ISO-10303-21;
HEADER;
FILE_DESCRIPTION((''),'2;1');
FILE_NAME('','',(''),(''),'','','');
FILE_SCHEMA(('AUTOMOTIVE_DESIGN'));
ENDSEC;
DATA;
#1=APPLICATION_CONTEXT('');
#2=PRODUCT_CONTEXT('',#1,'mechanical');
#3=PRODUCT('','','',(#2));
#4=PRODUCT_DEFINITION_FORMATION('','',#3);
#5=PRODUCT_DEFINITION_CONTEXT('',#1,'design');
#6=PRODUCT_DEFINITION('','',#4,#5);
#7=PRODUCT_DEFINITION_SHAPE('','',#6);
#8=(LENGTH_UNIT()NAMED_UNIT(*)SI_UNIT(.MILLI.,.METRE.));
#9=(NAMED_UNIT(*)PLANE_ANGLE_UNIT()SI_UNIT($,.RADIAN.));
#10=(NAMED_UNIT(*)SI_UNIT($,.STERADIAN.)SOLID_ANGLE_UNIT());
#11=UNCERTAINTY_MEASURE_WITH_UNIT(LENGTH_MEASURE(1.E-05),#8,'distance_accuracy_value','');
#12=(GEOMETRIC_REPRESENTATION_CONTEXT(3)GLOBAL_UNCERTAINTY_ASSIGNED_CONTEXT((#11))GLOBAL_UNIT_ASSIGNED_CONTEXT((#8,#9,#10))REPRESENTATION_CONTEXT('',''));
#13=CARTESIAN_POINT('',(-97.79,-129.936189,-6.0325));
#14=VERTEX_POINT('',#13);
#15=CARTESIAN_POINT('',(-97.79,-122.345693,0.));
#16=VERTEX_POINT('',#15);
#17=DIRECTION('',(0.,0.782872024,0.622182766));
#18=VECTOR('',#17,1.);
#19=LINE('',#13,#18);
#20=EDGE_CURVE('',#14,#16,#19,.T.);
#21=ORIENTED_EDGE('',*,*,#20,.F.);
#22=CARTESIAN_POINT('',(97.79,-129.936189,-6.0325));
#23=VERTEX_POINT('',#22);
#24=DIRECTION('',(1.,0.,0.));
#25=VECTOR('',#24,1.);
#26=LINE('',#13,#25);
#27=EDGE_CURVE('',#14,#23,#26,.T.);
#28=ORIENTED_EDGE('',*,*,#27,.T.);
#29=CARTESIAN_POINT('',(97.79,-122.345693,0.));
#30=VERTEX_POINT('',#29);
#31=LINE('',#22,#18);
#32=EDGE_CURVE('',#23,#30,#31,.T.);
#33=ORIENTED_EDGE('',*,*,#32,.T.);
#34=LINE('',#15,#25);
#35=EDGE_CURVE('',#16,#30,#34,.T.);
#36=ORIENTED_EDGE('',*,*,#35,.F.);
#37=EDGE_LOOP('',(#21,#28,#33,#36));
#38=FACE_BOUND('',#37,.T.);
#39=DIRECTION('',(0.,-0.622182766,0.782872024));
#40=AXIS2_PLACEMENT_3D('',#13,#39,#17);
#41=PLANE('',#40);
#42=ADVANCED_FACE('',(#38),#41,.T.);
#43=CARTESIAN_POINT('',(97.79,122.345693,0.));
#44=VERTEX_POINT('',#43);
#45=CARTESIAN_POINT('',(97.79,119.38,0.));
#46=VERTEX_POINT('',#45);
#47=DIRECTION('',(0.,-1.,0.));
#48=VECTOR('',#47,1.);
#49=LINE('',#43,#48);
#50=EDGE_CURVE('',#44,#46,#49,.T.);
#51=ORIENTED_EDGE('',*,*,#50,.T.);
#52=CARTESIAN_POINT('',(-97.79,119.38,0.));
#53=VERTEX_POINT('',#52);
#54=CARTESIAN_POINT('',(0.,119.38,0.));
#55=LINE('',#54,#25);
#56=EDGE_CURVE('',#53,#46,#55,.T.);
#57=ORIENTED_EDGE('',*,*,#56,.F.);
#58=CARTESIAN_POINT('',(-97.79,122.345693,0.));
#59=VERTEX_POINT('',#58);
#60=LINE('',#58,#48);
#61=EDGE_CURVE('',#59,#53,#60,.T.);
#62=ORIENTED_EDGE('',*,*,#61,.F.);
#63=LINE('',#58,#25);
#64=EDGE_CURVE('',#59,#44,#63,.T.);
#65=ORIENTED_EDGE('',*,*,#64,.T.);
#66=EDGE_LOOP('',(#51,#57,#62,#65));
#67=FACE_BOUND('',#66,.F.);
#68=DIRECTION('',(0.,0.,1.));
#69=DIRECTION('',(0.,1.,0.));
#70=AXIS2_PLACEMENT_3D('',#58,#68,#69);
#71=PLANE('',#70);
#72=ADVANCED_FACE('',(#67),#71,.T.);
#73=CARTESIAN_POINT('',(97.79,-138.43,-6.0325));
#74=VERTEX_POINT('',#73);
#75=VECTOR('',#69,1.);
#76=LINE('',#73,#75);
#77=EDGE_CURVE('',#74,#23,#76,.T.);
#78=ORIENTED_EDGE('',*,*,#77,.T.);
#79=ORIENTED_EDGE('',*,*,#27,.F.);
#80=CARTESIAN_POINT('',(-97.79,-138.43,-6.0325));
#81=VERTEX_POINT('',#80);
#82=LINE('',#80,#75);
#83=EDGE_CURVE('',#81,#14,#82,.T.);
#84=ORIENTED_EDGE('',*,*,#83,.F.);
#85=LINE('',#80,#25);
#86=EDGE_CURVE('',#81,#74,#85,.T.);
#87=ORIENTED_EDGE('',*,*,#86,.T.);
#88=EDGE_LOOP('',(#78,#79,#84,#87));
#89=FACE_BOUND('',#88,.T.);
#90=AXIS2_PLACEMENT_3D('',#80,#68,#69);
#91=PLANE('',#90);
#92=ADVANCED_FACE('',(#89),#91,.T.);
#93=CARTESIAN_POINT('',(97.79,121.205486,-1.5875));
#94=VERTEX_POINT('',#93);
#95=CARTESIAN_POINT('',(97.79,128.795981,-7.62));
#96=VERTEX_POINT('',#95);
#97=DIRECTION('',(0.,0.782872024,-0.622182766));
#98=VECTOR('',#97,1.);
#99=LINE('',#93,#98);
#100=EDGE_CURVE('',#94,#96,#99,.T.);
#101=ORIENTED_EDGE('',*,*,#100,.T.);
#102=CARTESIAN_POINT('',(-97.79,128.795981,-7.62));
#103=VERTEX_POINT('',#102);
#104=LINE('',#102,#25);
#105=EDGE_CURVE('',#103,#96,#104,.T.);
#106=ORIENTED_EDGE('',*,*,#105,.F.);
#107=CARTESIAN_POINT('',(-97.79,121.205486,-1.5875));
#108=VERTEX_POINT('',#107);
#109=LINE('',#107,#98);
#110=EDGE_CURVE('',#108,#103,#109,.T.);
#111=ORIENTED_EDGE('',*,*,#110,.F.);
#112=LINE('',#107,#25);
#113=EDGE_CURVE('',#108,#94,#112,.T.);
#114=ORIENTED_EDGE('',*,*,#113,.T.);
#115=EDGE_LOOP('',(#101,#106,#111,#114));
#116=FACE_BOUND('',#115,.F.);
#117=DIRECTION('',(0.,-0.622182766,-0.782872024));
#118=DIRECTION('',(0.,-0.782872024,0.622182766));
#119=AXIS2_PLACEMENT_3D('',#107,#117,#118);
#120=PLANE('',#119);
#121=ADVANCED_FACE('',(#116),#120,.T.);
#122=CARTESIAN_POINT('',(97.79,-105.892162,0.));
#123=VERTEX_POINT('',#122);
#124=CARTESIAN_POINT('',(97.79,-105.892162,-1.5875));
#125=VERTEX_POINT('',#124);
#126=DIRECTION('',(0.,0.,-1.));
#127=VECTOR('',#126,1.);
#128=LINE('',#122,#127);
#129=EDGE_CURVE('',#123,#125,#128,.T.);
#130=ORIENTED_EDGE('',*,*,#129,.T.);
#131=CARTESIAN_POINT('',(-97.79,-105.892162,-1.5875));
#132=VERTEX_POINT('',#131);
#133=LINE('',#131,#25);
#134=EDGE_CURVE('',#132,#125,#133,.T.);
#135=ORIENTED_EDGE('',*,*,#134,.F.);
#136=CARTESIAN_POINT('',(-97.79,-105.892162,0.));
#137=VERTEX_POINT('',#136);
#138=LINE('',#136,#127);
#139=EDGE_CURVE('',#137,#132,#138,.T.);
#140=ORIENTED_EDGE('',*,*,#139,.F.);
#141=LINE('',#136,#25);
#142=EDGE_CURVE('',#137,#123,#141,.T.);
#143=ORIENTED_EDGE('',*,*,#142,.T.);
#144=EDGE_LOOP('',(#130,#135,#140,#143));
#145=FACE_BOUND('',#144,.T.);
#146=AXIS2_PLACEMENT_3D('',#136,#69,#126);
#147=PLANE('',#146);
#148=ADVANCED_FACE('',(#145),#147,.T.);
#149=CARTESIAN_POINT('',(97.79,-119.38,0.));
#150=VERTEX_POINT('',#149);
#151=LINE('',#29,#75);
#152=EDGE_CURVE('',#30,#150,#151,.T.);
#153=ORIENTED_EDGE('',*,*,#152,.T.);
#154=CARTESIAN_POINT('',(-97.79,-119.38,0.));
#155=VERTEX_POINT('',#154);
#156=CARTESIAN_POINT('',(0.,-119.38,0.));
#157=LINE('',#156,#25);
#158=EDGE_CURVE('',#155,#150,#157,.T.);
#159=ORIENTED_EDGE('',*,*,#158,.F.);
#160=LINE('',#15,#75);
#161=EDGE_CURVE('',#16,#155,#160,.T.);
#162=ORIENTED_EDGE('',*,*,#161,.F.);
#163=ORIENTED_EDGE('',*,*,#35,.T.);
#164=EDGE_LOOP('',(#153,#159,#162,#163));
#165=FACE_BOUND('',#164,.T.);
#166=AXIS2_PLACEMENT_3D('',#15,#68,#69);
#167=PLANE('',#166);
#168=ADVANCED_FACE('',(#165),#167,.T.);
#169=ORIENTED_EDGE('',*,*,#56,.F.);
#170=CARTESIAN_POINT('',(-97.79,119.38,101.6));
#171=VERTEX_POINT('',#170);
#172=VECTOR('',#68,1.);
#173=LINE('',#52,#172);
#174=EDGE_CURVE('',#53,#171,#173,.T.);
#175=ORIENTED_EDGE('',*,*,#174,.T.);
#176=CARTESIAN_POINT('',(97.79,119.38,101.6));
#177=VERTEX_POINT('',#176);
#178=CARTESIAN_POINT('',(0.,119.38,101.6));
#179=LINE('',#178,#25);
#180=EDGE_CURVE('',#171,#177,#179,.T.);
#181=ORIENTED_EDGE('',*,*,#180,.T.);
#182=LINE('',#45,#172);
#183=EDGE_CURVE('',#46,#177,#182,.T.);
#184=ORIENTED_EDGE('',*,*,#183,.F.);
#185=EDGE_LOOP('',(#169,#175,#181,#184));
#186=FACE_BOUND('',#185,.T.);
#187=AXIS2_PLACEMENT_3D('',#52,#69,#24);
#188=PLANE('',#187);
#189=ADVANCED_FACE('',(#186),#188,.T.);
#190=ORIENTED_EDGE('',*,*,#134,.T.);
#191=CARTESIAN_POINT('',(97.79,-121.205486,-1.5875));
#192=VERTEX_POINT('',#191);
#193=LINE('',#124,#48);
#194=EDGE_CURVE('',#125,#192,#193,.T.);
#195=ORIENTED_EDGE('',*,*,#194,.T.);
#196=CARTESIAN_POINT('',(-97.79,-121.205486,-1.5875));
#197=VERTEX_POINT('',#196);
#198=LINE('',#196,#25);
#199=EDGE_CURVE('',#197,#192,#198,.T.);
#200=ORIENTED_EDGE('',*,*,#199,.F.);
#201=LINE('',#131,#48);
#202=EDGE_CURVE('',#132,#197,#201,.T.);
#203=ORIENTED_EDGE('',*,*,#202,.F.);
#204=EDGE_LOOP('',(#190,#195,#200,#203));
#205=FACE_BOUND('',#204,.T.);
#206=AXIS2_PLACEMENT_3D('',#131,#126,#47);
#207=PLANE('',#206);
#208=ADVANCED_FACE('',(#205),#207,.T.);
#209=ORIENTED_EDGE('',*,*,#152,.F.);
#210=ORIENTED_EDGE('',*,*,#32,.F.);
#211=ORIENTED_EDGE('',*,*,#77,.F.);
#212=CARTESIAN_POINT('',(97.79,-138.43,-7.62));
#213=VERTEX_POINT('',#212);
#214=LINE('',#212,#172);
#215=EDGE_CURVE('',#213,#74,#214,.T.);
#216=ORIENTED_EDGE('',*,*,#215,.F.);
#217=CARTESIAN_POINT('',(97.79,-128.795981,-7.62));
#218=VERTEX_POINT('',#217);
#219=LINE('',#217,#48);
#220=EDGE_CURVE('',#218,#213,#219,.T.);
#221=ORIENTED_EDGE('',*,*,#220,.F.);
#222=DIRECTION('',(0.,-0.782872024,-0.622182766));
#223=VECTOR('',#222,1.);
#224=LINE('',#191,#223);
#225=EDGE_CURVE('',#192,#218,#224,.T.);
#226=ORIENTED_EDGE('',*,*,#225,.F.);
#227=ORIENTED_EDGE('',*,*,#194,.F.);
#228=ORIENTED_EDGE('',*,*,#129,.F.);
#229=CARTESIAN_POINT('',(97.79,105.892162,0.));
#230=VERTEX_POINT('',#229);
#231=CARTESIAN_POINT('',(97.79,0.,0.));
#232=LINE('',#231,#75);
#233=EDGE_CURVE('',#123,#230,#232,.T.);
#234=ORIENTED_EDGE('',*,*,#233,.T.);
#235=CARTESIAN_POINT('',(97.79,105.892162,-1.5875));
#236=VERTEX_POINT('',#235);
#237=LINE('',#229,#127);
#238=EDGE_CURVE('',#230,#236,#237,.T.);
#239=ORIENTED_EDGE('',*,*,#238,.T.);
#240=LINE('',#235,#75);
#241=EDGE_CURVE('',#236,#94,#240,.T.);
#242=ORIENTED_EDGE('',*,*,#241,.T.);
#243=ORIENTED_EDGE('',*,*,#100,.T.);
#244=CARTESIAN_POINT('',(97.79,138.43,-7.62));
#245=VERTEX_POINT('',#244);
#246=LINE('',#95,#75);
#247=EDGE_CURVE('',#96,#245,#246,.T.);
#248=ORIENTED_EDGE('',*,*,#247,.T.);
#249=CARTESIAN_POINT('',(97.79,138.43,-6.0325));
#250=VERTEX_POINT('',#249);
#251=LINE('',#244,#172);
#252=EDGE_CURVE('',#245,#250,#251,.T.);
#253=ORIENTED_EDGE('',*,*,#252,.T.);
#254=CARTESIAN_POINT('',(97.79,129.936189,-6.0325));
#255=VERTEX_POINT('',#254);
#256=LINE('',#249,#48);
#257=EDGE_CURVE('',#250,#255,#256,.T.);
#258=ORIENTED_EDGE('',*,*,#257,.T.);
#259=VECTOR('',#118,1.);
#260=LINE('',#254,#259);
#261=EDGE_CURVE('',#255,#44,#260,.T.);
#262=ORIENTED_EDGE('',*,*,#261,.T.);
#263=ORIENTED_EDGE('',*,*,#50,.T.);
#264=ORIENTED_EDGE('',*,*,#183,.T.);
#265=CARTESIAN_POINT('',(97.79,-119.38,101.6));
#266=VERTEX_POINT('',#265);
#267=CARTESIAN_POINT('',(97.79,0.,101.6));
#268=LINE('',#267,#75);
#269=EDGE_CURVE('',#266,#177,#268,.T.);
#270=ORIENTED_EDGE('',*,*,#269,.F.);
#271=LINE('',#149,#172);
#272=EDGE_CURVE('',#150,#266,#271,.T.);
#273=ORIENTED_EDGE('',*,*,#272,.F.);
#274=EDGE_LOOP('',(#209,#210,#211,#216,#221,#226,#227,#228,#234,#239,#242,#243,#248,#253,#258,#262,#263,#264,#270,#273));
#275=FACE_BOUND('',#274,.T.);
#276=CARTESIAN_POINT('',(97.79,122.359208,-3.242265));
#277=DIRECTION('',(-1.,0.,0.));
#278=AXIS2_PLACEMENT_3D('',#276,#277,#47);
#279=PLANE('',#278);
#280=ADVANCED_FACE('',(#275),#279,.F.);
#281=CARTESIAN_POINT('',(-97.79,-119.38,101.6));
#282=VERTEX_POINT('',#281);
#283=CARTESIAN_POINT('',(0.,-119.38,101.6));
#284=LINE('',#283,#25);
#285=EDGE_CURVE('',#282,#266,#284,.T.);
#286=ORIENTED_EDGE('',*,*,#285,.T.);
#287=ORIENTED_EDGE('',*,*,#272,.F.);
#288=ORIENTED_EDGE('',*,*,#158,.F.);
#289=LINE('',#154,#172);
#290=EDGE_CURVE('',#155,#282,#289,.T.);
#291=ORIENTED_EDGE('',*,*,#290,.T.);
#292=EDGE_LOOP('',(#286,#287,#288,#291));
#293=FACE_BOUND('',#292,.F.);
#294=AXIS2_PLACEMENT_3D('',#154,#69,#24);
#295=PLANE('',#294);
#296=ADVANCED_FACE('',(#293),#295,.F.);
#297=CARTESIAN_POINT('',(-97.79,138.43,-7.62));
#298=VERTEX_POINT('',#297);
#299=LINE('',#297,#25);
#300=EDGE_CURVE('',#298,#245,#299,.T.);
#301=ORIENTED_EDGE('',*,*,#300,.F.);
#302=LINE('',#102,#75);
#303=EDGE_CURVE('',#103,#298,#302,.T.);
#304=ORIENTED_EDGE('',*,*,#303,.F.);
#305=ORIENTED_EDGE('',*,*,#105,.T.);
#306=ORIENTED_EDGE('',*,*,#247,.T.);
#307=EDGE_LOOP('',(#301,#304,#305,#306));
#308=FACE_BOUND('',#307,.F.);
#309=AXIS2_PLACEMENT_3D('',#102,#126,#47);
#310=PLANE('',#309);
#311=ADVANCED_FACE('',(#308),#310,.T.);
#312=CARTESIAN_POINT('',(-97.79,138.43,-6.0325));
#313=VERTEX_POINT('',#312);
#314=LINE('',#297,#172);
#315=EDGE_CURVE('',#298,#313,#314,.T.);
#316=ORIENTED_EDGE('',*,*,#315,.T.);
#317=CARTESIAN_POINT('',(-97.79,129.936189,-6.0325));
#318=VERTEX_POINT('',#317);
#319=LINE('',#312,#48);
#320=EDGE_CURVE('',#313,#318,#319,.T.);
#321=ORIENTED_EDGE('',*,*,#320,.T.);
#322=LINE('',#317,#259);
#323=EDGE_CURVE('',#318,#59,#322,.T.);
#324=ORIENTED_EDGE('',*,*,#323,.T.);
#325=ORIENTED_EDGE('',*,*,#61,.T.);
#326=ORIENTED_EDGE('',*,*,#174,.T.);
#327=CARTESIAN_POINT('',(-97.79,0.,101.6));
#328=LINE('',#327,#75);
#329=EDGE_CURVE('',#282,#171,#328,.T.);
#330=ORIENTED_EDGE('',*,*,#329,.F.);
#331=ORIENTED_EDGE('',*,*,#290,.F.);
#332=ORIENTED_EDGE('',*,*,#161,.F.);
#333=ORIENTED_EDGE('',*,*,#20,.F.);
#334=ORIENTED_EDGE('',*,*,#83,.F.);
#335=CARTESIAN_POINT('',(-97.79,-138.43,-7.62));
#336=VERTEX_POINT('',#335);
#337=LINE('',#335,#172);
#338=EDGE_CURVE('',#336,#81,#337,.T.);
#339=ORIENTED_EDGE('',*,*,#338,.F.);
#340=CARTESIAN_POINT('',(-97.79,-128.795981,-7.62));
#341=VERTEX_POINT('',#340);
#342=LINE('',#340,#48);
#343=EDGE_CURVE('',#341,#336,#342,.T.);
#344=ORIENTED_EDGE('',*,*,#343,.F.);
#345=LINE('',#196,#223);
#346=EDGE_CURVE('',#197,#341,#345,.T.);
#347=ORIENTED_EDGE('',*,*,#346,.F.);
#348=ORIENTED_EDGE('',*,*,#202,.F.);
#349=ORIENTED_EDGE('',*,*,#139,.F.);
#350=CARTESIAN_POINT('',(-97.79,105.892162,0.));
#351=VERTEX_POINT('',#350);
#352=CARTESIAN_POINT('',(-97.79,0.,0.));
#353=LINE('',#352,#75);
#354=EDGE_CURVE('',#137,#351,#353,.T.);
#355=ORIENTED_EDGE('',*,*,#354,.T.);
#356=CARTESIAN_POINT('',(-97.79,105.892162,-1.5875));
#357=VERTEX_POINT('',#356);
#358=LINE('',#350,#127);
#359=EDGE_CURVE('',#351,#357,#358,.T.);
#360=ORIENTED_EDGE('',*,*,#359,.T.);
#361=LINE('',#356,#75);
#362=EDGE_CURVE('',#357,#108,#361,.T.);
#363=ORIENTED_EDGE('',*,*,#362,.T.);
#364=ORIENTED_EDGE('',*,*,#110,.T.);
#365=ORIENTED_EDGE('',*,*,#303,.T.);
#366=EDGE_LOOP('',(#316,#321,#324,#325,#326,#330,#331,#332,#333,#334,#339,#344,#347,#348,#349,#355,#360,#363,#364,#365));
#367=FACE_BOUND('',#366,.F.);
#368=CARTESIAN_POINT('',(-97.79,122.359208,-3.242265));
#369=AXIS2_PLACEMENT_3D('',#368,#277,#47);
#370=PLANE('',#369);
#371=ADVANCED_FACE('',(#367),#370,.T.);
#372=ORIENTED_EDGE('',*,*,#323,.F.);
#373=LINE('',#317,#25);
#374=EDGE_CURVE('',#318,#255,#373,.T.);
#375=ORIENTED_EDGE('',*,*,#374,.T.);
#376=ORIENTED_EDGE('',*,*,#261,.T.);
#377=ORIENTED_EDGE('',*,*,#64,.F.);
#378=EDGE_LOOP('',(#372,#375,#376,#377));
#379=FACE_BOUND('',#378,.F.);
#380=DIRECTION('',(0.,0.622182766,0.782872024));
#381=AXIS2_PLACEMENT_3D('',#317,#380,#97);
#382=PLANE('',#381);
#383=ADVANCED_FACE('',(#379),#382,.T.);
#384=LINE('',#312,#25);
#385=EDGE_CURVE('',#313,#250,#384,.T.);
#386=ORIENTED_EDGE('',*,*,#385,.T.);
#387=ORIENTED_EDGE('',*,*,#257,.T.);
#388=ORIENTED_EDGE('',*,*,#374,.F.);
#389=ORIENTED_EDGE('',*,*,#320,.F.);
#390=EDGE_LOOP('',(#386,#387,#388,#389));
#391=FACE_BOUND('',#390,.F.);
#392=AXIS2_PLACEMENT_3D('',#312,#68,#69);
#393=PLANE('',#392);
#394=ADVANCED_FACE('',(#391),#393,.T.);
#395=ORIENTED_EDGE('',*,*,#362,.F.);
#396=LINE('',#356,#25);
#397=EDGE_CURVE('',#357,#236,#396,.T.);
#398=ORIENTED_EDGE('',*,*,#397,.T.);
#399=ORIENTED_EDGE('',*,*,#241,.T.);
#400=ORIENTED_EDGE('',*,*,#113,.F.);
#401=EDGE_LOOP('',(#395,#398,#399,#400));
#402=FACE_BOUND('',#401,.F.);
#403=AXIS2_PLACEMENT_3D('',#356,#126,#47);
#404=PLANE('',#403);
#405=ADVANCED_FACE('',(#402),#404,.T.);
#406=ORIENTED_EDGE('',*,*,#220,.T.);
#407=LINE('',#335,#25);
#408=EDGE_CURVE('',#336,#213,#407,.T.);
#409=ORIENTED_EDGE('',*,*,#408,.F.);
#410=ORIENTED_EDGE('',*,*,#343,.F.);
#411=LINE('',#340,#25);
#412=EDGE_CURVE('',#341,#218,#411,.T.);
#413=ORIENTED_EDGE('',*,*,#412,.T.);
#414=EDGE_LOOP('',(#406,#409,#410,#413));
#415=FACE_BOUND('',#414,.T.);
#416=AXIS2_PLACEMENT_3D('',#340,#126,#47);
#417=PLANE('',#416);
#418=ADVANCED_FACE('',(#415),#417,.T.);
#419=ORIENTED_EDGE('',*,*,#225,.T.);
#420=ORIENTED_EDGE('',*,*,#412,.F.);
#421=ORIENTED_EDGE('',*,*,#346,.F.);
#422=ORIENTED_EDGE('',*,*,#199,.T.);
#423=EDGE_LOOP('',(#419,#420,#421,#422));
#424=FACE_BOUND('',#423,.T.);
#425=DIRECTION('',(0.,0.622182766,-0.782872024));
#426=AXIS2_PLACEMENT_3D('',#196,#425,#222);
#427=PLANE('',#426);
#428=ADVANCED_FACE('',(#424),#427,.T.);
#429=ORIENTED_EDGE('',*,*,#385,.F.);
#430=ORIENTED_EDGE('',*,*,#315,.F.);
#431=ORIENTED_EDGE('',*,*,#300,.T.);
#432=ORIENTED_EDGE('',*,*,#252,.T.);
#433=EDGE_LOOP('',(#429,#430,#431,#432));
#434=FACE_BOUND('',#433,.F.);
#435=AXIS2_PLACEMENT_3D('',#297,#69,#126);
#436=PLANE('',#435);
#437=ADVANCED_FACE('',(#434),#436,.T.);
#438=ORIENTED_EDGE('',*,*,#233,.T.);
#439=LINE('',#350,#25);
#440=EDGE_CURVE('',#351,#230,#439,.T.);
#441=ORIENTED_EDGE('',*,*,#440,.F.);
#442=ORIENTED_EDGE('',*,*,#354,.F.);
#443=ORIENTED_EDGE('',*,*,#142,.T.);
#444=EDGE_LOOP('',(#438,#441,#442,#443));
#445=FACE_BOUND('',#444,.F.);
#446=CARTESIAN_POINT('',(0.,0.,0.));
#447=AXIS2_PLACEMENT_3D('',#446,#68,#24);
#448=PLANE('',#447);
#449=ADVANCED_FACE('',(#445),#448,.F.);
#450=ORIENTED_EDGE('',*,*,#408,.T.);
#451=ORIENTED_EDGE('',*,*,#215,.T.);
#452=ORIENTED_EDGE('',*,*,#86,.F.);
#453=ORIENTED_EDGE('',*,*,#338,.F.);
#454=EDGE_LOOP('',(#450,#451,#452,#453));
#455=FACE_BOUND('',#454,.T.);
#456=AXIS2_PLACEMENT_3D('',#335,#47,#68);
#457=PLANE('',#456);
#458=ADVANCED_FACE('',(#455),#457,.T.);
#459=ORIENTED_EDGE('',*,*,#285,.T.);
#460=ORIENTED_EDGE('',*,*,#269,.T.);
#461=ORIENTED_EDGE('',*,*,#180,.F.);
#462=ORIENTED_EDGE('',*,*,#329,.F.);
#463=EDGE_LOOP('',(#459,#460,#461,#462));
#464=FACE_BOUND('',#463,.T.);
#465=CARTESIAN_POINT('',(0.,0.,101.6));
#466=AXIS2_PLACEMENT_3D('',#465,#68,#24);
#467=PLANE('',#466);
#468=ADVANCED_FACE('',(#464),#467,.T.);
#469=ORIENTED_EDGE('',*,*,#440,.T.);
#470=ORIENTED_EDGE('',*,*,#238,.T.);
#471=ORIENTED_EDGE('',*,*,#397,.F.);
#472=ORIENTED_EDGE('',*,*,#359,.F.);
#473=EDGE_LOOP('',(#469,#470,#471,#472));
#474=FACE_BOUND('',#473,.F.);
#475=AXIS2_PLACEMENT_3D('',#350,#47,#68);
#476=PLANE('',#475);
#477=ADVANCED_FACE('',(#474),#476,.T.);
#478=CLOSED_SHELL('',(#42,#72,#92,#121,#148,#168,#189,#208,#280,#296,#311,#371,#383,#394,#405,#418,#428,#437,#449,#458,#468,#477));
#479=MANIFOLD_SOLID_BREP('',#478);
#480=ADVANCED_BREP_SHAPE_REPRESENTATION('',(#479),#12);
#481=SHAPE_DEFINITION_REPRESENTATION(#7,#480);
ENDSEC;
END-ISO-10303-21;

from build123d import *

# Parameters (mm, degrees)
F0_W     = 195.58
F0_H     = 238.76
F1_DEPTH = 101.6
F3_DEPTH = 195.58


# Not quite as in the source:
# - a pattern or mirror of a feature is missing from the dataset's text; its kind, count and spacing are read off the source's solid


with BuildPart() as f1:
    # F0 (on Top) → F1 (new body)
    with BuildSketch(Plane.XY):
        Rectangle(F0_W, F0_H)
    extrude(amount=F1_DEPTH)

    # F2 (on face) → F3 (join)
    with BuildSketch(Plane(origin=(-97.79, 0, 0), x_dir=(0, -1, 0), z_dir=(-1, 0, 0))):
        Polygon((122.3456934094, 0), (105.8921615149, 0), (105.8921615149, -1.5875), (121.2054859035, -1.5875), (128.7959814072, -7.62), (138.43, -7.62), (138.43, -6.0325), (129.9361889131, -6.0325), align=None)
    f3 = extrude(amount=-F3_DEPTH)

    # F3_copies: F3 across plane
    add(f3.mirror(Plane.ZX))


solid = f1.part
